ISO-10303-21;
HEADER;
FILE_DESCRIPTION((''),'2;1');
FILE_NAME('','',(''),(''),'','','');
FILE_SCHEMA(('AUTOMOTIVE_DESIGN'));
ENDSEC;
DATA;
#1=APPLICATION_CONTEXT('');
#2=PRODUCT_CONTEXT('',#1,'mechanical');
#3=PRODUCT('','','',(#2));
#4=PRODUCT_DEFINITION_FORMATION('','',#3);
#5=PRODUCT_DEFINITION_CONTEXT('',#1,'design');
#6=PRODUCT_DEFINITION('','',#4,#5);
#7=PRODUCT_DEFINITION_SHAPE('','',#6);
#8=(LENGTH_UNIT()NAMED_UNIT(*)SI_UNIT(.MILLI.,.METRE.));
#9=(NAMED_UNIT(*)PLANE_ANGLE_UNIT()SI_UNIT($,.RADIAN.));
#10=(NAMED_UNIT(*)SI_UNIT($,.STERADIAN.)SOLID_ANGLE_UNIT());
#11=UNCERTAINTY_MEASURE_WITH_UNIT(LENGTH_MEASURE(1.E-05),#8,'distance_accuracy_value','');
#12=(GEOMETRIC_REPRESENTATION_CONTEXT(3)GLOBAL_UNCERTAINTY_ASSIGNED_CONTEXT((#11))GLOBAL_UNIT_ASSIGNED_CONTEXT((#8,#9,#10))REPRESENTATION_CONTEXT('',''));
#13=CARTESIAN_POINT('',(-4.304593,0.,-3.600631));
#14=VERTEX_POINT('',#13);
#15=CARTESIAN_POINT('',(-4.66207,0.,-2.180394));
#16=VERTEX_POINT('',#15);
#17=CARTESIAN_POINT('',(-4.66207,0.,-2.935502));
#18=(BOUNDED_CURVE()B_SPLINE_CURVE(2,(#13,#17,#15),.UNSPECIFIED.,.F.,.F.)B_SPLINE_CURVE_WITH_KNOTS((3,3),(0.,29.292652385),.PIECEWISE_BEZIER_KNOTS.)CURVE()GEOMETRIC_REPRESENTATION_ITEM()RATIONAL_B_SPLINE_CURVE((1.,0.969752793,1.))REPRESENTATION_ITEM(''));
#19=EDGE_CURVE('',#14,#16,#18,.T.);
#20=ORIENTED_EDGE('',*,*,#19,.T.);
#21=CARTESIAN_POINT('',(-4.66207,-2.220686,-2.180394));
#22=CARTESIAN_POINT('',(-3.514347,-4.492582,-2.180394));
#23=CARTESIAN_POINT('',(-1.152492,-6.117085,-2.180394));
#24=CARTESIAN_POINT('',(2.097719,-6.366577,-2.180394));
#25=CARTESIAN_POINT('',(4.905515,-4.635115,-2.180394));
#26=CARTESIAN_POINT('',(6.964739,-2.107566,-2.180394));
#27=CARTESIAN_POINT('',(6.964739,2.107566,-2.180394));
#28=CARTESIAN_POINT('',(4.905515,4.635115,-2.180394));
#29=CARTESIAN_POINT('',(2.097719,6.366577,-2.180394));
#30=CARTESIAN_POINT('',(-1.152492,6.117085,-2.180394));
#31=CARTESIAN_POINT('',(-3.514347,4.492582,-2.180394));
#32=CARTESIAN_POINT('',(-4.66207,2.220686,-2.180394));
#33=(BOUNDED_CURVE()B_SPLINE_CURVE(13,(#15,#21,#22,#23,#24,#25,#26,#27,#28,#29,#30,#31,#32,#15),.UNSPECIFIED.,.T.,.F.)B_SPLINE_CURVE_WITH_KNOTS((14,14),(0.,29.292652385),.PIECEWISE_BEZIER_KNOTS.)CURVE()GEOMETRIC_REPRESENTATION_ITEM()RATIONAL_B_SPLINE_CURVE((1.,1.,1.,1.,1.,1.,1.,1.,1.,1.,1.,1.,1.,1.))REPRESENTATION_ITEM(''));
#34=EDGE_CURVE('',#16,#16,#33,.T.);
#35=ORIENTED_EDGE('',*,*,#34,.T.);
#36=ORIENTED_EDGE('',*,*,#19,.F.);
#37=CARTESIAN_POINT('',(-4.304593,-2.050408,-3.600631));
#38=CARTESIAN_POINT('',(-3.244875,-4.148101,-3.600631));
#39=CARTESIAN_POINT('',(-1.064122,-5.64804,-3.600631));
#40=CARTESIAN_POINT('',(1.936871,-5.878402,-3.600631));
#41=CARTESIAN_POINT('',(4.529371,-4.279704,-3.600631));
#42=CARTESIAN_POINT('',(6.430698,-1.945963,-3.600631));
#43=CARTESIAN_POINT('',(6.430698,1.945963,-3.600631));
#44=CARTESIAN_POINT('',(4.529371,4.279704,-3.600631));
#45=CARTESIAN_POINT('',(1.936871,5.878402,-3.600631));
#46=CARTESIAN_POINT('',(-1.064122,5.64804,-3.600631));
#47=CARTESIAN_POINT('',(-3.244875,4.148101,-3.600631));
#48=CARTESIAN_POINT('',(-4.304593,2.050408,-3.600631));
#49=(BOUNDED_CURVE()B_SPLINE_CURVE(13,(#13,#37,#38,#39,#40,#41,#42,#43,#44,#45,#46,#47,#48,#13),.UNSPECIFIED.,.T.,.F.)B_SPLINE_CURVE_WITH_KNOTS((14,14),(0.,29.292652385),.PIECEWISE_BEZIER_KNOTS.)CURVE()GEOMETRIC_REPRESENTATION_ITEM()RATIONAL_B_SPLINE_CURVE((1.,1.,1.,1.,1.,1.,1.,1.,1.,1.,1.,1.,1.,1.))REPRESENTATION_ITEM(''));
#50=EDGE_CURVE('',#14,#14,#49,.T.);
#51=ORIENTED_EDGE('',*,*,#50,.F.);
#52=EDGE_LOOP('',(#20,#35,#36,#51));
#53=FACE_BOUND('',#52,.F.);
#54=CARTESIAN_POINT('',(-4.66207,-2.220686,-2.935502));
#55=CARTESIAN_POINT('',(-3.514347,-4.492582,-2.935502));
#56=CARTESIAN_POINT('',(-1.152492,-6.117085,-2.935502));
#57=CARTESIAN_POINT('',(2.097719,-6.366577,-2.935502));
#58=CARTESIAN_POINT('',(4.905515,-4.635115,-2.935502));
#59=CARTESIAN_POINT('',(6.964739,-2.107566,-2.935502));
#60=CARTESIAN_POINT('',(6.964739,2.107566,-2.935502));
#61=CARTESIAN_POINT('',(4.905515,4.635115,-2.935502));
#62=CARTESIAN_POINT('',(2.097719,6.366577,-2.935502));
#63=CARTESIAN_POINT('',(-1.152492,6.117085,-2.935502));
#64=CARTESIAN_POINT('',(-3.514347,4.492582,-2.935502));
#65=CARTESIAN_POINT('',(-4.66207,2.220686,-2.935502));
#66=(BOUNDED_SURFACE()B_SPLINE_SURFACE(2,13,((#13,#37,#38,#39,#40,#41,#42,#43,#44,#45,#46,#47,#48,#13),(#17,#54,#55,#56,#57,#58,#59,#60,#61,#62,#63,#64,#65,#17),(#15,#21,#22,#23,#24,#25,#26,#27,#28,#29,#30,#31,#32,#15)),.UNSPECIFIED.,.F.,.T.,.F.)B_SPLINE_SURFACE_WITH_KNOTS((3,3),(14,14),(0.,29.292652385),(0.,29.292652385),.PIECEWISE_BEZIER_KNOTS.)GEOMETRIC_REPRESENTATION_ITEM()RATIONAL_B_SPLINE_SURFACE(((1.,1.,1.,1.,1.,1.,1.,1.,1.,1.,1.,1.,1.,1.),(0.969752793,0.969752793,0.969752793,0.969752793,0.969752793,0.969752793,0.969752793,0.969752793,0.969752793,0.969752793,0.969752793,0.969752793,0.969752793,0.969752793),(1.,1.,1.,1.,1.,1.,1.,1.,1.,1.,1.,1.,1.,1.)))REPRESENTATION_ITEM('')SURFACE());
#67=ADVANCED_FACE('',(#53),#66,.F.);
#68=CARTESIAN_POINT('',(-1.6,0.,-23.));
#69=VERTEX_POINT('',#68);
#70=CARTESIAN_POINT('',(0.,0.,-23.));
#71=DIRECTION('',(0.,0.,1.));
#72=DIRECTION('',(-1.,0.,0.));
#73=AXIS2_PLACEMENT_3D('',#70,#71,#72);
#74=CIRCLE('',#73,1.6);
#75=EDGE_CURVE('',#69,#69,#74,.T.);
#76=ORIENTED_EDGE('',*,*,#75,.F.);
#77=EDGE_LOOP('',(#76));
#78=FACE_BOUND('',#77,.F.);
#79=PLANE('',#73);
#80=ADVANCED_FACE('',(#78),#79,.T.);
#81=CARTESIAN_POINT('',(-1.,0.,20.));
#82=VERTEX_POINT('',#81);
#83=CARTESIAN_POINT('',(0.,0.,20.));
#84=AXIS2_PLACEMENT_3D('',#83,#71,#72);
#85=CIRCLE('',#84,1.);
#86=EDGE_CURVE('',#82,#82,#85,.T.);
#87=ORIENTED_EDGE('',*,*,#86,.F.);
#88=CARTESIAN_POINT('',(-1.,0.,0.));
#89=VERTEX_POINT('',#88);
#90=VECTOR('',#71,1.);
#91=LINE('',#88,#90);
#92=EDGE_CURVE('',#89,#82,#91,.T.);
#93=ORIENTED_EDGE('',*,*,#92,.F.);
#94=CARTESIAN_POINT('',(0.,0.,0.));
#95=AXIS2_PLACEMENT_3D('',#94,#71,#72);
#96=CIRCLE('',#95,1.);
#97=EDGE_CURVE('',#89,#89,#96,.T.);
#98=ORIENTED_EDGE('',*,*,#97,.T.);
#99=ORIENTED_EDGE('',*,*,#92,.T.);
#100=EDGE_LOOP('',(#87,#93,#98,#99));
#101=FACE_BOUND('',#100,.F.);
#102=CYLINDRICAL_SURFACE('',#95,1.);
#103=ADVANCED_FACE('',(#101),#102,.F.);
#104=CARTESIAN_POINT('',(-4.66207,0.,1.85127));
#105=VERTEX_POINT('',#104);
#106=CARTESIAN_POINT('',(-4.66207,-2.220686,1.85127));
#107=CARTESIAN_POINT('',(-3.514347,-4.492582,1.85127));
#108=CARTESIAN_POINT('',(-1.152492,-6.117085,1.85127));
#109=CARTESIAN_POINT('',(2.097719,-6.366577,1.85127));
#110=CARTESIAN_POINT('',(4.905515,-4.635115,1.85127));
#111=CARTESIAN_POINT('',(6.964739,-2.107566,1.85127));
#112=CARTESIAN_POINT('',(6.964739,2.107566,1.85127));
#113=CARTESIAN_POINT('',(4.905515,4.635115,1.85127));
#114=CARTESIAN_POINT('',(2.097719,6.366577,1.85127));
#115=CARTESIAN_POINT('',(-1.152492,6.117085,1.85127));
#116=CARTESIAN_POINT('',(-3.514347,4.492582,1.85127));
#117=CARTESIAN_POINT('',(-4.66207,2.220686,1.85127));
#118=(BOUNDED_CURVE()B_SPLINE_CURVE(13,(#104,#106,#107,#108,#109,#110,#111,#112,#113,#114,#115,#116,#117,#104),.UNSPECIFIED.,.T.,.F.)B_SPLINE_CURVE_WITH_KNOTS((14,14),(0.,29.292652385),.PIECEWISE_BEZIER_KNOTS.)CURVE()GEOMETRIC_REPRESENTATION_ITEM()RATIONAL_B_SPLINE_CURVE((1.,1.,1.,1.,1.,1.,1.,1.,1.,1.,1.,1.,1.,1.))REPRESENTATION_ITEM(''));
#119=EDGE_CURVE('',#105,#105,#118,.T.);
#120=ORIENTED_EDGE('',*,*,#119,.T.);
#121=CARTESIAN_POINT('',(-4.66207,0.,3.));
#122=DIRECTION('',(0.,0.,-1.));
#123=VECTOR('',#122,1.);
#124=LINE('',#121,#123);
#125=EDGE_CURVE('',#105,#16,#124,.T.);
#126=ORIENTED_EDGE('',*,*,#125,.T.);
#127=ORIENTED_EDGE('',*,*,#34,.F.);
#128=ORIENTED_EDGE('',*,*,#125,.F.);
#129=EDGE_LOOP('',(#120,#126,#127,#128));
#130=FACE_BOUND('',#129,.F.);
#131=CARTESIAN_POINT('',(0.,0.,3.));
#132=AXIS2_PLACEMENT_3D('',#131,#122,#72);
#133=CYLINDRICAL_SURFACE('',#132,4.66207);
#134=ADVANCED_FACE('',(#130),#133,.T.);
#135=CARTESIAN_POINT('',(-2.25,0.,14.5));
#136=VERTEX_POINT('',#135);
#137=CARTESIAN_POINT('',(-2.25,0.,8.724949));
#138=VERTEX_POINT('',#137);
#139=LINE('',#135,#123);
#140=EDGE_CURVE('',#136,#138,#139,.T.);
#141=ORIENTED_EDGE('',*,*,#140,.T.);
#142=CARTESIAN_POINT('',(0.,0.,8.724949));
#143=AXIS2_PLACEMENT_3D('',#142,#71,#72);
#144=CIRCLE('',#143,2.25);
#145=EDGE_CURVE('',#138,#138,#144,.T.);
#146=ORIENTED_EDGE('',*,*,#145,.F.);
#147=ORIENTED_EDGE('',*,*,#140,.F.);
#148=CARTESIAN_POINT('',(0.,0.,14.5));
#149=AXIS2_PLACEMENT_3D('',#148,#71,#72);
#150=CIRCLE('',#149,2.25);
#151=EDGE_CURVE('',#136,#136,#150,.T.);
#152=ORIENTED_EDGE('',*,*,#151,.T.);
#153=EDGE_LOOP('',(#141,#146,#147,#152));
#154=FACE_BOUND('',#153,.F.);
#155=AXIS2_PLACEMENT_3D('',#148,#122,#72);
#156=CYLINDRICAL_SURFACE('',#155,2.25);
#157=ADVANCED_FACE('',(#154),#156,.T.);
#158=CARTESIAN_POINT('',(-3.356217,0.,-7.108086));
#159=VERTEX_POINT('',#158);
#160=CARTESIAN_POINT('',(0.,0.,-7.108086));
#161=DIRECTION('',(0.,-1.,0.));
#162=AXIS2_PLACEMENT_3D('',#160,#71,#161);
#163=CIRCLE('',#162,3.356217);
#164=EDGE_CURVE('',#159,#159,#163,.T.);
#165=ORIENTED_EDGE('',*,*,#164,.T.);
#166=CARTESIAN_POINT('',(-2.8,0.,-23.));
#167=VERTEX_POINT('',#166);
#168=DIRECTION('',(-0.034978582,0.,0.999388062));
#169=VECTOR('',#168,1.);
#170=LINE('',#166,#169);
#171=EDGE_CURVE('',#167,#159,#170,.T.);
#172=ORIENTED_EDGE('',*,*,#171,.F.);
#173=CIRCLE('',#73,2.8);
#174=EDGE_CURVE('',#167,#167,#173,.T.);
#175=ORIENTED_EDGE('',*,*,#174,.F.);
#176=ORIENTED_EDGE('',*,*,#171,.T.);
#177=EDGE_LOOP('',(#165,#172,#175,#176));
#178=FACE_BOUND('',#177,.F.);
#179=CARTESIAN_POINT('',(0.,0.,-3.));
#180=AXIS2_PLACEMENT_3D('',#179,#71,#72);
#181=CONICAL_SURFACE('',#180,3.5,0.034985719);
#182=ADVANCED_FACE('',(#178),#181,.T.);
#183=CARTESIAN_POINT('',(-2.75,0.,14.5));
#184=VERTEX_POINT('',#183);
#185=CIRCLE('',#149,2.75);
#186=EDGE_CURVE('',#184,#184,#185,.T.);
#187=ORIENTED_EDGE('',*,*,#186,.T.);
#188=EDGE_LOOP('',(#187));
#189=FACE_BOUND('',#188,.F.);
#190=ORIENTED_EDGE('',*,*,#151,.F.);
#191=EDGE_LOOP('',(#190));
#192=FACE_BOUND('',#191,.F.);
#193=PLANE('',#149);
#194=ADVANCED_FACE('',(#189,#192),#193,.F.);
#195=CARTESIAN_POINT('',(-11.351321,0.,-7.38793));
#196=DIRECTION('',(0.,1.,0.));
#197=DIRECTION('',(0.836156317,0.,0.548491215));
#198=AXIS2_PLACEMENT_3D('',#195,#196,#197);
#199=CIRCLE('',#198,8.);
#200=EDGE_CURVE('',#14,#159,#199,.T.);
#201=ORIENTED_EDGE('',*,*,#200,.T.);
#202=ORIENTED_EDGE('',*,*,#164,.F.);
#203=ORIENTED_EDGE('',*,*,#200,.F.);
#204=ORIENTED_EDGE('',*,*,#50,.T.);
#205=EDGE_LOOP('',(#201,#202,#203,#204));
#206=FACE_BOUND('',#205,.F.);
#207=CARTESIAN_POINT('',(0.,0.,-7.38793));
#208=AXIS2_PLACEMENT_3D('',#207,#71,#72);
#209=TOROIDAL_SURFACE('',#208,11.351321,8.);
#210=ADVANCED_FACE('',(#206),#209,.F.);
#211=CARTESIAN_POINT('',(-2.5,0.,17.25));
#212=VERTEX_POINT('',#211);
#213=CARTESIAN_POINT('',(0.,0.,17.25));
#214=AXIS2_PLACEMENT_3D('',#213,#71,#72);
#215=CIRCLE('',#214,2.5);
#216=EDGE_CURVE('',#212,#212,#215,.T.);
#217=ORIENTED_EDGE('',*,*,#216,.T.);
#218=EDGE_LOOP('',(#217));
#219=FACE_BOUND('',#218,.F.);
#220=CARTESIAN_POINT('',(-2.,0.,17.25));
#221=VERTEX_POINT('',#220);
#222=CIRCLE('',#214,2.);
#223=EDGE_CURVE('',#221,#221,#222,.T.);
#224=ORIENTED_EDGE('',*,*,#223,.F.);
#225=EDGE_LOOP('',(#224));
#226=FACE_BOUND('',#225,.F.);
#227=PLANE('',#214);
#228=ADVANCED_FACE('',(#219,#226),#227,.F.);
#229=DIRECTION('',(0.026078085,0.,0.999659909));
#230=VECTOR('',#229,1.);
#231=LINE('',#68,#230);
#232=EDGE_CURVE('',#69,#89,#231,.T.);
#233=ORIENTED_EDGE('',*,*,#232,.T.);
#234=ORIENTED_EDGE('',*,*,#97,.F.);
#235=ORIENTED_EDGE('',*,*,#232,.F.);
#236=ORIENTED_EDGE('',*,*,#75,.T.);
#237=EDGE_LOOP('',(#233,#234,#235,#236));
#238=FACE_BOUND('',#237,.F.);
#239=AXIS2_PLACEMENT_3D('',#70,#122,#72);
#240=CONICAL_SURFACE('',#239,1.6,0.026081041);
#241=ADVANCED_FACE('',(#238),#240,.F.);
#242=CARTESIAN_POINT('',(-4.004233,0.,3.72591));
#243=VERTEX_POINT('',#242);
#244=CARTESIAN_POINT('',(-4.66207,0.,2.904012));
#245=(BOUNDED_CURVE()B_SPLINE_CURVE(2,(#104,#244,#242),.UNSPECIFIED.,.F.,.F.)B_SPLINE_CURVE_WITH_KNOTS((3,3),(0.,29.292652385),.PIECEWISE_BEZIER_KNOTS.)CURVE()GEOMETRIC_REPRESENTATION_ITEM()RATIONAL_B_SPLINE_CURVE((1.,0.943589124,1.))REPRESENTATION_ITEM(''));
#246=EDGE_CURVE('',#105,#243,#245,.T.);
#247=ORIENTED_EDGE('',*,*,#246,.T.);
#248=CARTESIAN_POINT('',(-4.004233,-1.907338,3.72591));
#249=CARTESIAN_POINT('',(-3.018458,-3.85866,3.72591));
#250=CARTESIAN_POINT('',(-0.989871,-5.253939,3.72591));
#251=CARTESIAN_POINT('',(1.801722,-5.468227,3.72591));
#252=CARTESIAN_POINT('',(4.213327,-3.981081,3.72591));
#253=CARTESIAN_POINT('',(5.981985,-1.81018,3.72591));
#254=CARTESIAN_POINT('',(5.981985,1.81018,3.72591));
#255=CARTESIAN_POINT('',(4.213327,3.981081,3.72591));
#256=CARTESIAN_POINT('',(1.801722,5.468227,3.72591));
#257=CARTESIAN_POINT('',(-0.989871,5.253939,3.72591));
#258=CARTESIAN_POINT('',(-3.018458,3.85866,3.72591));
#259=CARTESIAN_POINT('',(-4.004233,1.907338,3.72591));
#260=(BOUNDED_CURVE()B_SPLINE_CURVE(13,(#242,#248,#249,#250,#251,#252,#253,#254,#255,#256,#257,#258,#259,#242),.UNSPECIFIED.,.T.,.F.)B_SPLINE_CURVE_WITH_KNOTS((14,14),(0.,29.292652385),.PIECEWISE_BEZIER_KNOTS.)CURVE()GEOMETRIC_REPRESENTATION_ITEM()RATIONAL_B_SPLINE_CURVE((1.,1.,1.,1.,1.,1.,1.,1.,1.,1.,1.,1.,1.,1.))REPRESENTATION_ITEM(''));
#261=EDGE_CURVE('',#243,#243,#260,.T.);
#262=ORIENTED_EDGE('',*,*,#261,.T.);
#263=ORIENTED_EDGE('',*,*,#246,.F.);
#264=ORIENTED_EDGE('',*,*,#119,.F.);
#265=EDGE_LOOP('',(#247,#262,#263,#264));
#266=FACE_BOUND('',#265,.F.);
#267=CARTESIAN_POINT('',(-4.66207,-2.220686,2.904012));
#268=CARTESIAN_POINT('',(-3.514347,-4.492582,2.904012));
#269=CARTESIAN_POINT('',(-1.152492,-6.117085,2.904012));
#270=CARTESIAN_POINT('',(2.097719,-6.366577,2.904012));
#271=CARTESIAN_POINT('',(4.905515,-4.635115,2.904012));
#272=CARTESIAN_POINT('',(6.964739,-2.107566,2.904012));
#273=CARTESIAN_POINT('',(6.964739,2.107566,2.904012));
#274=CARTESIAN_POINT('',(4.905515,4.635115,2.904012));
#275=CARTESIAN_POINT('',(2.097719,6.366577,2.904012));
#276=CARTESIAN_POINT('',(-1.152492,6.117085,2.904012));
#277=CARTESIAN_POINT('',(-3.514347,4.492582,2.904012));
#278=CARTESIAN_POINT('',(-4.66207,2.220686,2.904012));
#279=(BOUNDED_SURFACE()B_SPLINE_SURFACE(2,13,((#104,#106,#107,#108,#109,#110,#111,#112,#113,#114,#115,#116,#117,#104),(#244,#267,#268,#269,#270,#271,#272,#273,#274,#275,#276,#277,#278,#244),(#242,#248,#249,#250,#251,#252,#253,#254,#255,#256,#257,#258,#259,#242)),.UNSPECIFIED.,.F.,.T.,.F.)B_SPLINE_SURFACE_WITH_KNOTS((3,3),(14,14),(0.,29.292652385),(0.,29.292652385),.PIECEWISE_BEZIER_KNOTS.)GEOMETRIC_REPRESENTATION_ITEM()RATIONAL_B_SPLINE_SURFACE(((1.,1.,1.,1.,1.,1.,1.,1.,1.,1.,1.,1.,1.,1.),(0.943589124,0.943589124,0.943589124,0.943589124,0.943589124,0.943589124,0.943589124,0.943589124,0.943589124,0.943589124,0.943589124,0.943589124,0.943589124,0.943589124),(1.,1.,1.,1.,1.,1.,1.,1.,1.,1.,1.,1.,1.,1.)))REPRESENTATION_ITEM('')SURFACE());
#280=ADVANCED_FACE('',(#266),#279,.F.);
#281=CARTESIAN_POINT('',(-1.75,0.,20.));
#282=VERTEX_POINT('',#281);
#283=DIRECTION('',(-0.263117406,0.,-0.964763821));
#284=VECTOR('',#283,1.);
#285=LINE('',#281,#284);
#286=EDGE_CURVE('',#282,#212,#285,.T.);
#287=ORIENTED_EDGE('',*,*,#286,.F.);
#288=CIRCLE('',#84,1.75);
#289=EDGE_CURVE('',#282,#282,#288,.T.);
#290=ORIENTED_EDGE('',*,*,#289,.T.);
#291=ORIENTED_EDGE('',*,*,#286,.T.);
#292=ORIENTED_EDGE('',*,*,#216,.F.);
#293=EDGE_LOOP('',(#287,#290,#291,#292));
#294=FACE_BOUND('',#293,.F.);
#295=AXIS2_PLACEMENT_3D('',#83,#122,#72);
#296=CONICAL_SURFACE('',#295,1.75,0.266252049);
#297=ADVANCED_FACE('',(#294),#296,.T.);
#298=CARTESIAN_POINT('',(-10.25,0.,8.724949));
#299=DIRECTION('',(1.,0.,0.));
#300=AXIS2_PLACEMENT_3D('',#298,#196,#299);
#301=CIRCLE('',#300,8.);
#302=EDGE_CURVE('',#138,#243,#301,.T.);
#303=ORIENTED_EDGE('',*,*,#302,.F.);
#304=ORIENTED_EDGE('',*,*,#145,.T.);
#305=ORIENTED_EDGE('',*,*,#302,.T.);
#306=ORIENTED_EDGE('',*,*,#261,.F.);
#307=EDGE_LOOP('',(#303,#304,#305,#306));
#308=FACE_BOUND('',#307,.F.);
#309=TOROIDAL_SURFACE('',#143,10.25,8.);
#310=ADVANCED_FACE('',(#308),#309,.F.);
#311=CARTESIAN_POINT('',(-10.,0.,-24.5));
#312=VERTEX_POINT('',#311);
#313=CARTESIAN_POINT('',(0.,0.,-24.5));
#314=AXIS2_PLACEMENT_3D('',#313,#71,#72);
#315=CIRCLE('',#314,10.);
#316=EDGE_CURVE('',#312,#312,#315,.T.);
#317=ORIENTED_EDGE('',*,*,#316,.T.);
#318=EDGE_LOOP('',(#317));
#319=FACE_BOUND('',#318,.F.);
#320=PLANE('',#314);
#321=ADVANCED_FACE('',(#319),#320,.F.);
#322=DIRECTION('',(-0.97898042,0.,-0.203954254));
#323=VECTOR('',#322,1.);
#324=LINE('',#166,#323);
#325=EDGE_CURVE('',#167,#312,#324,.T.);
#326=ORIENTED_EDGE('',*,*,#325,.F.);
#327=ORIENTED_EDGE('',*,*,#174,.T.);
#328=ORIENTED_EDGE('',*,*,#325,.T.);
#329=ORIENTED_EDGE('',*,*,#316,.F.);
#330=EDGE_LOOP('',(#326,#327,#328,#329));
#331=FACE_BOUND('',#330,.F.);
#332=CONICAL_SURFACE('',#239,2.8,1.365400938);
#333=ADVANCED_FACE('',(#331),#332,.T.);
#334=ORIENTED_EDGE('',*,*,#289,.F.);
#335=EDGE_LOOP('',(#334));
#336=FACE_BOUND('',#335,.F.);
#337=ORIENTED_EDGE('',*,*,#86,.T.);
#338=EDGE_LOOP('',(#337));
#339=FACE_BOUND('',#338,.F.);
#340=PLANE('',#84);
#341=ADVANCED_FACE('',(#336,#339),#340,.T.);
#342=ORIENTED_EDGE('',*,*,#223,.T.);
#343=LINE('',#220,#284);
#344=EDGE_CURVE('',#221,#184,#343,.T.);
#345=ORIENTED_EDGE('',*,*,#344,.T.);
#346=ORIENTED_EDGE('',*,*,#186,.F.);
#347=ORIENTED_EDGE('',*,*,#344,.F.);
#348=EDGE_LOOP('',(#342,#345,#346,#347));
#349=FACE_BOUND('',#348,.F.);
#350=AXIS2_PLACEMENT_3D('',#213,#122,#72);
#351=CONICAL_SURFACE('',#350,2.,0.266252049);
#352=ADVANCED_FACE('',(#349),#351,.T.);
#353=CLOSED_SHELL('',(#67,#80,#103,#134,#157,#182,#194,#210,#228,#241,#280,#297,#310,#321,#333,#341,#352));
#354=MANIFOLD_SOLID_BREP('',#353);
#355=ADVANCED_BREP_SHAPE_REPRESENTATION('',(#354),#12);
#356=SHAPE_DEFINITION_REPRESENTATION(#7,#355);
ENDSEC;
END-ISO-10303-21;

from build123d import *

# Parameters (mm, degrees)
F3_R = 3


# Not quite as in the source:
# - a fillet or chamfer that OpenCascade refuses, or shapes differently, is made with other operations: its cross-section is extruded or revolved along the edge and cut away or added


with BuildPart() as f1:
    # F0 (on Front) → F1 (revolve)
    with BuildSketch(Plane.XZ):
        Polygon((-1, 0), (-1, 20), (-1.75, 20), (-2.5, 17.25), (-2, 17.25), (-2.75, 14.5), (-2.25, 14.5), (-2.25, 3), (-4.6620704234, 3), (-4.6620704234, -3), (-3.5, -3), (-2.8, -23), (-1.6, -23), align=None)
        Polygon((0, -23), (-1.6, -23), (-2.8, -23), (-10, -24.5), (0, -24.5), align=None)
    revolve(axis=Axis((0, 0, 10), (0, 0, 1)))

    # F2: fillet of radius 8 on 2 edges, made by hand

    # F2_s1 → F2_t2 (revolve)
    with BuildSketch(Plane.XZ):
        with BuildLine():
            ThreePointArc((-2.25, 8.7249491741), (-2.8776382138, 5.6187808443), (-4.6620704234, 3))
            Line((-4.6620704234, 3), (-4.5503118318, 2.8855010165))
            ThreePointArc((-4.5503118318, 2.8855010165), (-3.4560352117, 2.84), (-2.25, 2.84))
            Line((-2.25, 2.84), (-2.09, 3))
            Line((-2.09, 3), (-2.09, 8.7249491741))
            Line((-2.09, 8.7249491741), (-2.25, 8.7249491741))
        make_face()
    revolve(axis=Axis((0, 0, 3), (0, 0, 1)))

    # F2_s3 → F2_t4 (revolve)
    with BuildSketch(Plane.XZ):
        with BuildLine():
            ThreePointArc((-4.6620704234, -3), (-3.7272345044, -4.9644393238), (-3.3562164627, -7.1081010661))
            Line((-3.3562164627, -7.1081010661), (-3.1963143727, -7.102504493))
            Line((-3.1963143727, -7.102504493), (-3.3400979101, -2.9944034269))
            Line((-3.3400979101, -2.9944034269), (-3.5, -2.84))
            ThreePointArc((-3.5, -2.84), (-4.0810352117, -2.84), (-4.5282854126, -2.9122414055))
            Line((-4.5282854126, -2.9122414055), (-4.6620704234, -3))
        make_face()
    revolve(axis=Axis((0, 0, -3), (0, 0, 1)))

    # F3
    f3_edges = [f1.edges().sort_by_distance(p)[0] for p in [
        (4.66207, 0, 3),
        (4.66207, 0, -3),
    ]]
    fillet(f3_edges, radius=F3_R)


solid = f1.part
